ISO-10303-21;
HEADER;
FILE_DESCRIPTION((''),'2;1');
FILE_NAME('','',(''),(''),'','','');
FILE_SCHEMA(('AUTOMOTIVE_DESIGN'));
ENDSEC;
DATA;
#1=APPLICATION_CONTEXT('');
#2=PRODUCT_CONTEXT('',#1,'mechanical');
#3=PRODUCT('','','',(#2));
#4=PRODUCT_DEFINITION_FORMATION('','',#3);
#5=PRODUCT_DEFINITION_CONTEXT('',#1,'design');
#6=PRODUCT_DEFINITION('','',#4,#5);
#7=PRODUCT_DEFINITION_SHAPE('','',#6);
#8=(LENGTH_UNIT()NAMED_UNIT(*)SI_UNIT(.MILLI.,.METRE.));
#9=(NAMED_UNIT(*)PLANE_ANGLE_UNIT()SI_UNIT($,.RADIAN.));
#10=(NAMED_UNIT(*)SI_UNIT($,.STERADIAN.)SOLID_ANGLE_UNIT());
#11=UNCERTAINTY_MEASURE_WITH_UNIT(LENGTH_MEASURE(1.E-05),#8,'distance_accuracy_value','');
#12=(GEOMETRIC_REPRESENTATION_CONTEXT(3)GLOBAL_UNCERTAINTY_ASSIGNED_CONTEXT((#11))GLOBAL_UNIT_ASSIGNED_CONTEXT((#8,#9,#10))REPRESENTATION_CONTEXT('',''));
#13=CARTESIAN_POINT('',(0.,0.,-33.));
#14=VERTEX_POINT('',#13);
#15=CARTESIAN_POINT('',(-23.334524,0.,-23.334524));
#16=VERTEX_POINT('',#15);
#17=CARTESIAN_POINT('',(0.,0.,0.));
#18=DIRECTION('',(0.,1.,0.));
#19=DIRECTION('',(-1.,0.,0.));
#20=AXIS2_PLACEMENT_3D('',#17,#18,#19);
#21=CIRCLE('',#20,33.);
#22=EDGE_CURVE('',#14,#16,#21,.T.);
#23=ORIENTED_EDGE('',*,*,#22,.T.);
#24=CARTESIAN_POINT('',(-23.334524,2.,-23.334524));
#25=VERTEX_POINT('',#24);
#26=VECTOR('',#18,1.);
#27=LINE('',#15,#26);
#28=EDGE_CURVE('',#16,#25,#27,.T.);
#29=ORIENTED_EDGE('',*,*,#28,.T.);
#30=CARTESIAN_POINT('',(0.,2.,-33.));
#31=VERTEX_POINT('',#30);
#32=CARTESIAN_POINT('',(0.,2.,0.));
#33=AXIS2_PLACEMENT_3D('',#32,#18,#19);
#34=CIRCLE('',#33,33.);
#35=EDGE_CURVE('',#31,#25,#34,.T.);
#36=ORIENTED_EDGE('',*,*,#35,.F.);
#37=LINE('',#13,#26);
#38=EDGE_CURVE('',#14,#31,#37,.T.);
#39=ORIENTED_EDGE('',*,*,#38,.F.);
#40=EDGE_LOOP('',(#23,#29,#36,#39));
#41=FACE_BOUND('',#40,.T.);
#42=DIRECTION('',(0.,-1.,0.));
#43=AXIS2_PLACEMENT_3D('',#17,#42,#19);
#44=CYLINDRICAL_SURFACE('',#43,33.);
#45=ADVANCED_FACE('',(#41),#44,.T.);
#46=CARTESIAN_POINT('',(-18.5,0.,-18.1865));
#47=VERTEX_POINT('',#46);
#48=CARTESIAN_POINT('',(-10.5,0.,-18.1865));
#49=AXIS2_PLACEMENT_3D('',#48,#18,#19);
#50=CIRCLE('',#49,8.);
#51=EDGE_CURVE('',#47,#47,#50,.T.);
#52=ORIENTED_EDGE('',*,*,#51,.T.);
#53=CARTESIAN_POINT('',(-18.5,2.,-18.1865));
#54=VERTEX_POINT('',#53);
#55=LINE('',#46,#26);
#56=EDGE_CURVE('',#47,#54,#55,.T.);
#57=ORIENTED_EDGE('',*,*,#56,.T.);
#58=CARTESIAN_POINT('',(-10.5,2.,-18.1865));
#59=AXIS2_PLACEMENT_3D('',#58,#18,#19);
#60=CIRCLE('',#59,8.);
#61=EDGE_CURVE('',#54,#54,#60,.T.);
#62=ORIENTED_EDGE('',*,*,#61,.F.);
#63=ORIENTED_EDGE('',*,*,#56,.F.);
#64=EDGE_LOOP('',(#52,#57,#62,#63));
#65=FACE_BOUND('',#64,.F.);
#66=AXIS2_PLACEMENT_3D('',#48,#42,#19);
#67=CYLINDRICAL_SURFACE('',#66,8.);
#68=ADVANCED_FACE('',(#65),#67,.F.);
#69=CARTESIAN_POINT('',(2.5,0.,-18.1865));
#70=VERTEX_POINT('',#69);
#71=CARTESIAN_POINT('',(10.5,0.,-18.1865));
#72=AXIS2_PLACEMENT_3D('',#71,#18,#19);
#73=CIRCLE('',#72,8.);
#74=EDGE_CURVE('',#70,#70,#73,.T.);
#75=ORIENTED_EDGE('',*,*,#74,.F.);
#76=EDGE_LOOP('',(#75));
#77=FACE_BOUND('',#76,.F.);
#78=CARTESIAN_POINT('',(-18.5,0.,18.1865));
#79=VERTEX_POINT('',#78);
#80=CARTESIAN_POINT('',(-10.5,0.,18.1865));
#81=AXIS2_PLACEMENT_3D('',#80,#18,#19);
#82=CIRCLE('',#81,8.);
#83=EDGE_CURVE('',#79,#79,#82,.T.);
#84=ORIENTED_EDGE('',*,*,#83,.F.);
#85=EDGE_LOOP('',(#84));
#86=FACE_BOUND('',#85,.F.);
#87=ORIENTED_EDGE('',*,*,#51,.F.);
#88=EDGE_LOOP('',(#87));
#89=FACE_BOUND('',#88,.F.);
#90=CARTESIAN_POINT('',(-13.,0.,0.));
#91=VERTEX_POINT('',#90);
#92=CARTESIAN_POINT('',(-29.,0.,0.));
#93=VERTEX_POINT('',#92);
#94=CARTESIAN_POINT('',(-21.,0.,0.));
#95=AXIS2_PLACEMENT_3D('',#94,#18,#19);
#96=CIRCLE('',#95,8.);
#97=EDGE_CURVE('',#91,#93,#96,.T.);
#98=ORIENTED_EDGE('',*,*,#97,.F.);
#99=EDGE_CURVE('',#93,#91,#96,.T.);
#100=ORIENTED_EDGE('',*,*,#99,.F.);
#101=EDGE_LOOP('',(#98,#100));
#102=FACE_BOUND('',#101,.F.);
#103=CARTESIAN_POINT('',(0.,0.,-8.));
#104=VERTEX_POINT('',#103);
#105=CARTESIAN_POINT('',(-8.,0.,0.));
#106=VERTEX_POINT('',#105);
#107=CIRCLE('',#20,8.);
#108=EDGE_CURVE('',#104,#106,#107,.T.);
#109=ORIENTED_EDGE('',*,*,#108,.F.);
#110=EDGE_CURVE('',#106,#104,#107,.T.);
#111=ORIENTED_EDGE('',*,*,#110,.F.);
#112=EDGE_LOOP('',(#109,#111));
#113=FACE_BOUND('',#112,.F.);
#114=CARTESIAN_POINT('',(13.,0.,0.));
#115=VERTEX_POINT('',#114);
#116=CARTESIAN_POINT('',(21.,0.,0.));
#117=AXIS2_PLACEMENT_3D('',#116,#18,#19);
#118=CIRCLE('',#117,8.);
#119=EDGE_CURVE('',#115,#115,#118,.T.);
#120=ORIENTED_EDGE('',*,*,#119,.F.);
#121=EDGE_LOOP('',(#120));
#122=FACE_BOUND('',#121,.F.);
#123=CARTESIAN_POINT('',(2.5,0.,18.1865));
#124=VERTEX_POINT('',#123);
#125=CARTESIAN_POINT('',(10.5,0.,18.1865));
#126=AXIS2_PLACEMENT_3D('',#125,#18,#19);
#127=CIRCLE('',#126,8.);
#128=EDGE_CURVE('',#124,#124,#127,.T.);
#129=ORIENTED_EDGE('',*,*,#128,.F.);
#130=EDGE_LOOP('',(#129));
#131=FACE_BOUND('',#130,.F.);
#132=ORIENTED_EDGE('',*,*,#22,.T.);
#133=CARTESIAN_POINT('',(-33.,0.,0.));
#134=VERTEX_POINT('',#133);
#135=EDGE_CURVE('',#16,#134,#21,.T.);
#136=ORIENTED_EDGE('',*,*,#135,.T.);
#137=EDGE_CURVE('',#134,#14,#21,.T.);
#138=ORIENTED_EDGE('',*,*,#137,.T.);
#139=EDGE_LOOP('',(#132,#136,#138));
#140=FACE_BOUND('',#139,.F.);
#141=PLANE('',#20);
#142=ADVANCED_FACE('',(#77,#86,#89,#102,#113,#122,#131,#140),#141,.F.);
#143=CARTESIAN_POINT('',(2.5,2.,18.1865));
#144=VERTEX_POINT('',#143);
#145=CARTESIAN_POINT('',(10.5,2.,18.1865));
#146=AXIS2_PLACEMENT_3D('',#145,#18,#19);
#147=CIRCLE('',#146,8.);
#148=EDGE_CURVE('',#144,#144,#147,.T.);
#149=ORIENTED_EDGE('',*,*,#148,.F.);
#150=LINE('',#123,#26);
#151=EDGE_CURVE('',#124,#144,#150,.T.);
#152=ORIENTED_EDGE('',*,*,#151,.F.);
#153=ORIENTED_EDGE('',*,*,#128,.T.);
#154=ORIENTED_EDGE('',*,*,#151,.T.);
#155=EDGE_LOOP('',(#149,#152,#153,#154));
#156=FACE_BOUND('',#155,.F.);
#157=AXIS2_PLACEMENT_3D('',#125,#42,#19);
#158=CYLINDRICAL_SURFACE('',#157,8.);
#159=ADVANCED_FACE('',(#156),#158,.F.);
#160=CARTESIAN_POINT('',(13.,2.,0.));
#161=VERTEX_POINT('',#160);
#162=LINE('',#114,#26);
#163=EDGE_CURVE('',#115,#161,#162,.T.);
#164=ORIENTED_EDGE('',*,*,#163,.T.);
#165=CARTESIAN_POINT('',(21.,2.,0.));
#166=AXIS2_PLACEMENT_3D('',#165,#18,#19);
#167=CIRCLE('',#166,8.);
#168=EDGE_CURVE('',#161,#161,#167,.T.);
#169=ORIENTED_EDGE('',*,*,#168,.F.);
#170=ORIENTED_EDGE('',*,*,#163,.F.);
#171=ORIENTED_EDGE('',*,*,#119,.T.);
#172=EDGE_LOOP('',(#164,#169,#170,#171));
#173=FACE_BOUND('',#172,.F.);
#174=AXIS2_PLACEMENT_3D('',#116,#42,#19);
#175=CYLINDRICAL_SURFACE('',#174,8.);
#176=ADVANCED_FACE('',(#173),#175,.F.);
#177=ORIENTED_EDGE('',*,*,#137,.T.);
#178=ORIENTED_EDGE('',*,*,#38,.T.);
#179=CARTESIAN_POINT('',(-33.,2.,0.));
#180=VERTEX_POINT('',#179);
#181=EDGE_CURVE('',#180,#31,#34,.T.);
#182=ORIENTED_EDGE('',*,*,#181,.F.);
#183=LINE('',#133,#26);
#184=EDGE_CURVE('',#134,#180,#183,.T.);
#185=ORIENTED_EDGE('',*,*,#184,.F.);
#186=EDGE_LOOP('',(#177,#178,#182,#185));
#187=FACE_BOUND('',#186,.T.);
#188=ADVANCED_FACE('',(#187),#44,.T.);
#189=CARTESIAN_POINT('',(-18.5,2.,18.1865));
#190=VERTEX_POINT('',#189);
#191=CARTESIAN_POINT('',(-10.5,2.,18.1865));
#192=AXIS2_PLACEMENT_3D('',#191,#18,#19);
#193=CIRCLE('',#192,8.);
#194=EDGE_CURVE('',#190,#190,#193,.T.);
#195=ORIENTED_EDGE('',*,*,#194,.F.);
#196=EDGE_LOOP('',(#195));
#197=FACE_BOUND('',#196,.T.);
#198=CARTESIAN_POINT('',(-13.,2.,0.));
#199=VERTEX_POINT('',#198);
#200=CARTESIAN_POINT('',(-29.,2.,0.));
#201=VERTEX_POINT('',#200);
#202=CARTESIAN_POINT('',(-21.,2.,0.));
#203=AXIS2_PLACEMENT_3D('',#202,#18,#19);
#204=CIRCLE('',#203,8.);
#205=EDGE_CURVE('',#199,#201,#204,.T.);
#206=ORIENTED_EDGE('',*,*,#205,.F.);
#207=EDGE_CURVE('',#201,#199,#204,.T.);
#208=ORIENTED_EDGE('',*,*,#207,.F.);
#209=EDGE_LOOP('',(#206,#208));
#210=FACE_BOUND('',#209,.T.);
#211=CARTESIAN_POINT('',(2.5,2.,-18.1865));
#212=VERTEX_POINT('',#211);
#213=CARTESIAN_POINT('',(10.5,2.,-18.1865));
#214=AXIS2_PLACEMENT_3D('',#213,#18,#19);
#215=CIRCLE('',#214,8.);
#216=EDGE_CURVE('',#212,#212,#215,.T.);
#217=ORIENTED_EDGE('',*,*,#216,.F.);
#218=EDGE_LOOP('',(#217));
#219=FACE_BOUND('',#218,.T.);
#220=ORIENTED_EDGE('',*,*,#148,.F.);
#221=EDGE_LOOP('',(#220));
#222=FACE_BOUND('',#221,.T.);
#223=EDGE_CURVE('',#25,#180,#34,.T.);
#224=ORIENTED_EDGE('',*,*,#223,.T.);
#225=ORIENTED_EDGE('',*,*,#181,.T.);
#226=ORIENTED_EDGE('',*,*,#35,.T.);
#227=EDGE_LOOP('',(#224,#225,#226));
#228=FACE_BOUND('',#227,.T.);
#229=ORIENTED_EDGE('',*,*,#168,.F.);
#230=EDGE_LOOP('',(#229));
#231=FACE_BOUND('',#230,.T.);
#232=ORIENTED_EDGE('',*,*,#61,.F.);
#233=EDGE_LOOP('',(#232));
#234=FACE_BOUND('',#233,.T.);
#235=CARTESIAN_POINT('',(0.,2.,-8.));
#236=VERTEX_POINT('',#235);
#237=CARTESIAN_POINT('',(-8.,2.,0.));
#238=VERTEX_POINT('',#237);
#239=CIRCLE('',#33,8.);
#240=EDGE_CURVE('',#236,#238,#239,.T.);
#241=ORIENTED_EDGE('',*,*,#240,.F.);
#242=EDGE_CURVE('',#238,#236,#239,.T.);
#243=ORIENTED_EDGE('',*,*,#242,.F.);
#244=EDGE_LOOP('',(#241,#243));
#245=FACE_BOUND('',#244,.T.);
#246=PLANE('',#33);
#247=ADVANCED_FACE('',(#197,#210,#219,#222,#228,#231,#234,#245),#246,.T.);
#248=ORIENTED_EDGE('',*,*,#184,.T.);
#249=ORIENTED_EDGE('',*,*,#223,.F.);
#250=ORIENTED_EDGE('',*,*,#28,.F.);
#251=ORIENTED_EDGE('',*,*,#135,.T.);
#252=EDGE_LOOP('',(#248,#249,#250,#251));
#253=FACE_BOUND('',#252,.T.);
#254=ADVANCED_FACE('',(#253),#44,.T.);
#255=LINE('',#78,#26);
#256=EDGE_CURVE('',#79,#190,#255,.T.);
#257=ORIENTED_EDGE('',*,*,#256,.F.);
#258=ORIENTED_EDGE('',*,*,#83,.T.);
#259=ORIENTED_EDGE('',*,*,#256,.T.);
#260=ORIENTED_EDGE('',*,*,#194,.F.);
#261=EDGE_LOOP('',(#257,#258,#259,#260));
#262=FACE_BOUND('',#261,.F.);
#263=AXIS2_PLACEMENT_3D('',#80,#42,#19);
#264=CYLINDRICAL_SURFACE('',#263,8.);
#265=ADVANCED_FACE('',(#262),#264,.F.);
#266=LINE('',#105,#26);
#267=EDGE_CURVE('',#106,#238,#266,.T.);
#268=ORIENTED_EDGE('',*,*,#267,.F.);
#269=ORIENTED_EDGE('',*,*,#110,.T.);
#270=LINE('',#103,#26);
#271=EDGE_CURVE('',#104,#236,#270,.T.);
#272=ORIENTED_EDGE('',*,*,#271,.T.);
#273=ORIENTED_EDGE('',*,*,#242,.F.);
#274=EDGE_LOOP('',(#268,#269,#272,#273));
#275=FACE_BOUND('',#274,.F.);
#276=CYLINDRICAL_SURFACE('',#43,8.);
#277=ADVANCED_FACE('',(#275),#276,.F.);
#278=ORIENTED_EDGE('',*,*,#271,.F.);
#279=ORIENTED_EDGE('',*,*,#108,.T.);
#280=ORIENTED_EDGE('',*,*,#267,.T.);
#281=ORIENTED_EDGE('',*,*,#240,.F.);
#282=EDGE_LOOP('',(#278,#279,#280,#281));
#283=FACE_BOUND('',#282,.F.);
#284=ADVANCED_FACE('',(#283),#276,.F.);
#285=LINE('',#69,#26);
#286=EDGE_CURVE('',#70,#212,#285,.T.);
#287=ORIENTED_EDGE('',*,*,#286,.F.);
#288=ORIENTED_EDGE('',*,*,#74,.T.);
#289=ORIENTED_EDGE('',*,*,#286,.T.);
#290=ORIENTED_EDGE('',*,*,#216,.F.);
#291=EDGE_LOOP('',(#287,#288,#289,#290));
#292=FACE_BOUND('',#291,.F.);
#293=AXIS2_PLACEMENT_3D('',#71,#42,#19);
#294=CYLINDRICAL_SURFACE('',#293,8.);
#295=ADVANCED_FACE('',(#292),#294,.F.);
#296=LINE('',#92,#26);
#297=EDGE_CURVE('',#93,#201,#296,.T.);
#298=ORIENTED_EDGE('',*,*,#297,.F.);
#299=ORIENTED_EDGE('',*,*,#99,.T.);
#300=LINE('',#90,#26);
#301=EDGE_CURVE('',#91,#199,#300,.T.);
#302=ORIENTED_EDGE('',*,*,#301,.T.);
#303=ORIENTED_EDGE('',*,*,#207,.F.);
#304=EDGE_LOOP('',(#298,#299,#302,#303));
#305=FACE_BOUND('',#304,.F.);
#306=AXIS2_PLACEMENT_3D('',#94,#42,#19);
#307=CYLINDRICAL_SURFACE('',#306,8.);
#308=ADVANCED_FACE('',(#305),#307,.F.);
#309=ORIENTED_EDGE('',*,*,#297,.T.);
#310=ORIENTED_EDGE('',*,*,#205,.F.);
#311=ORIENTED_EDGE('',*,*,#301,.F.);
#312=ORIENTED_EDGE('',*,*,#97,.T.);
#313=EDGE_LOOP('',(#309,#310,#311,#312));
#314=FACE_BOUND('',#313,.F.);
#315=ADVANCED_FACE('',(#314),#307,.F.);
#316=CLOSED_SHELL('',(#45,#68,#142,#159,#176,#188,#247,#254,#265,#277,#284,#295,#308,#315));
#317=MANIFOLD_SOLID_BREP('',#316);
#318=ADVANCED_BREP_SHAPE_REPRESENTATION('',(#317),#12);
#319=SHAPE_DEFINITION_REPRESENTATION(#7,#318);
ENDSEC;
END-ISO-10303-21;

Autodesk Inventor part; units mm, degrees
ref_plane "YZ Plane" through (0, 0, 0) normal (1, 0, 0) x (0, 1, 0)
ref_plane "XZ Plane" through (0, 0, 0) normal (0, 1, 0) x (-1, 0, 0)
ref_plane "XY Plane" through (0, 0, 0) normal (0, 0, 1) x (1, 0, 0)
sketch "Sketch3" plane through (0, 0, 0) normal (0, 1, 0) x (-1, 0, 0)
  circle A0 centre (0, 0) radius 33
  circle A1 centre (0, 0) radius 8
  line L0 (0, 0) -> (32, 0) construction
  line L1 (0, 0) -> (34, 0) construction
  line L2 (24.0416, -24.0416) -> (20.5061, -20.5061)
  line L3 (0, 0) -> (34, 0) construction
  line L4 (0, 0) -> (22.2739, 0)
  line L5 (0, 0) -> (21, 0)
  circle A2 centre (21, 0) radius 8
  circle A3 centre (10.5, 18.1865) radius 8
  circle A4 centre (-10.5, 18.1865) radius 8
  circle A5 centre (-21, 0) radius 8
  circle A6 centre (-10.5, -18.1865) radius 8
  circle A7 centre (10.5, -18.1865) radius 8
  line L6 (0, 0) -> (0, -34)
  dimension "d15" = 66
  dimension "d17" = 16
  dimension "d25" = 34
  dimension "d27" = 5
  dimension "d31" = 21
  dimension "d32" = 16
  dimension "d35" = 360
  dimension "d39" = 34
extrude "Extrusion1" add sketch "Sketch3" along normal blind 2
properties part number "separator"
